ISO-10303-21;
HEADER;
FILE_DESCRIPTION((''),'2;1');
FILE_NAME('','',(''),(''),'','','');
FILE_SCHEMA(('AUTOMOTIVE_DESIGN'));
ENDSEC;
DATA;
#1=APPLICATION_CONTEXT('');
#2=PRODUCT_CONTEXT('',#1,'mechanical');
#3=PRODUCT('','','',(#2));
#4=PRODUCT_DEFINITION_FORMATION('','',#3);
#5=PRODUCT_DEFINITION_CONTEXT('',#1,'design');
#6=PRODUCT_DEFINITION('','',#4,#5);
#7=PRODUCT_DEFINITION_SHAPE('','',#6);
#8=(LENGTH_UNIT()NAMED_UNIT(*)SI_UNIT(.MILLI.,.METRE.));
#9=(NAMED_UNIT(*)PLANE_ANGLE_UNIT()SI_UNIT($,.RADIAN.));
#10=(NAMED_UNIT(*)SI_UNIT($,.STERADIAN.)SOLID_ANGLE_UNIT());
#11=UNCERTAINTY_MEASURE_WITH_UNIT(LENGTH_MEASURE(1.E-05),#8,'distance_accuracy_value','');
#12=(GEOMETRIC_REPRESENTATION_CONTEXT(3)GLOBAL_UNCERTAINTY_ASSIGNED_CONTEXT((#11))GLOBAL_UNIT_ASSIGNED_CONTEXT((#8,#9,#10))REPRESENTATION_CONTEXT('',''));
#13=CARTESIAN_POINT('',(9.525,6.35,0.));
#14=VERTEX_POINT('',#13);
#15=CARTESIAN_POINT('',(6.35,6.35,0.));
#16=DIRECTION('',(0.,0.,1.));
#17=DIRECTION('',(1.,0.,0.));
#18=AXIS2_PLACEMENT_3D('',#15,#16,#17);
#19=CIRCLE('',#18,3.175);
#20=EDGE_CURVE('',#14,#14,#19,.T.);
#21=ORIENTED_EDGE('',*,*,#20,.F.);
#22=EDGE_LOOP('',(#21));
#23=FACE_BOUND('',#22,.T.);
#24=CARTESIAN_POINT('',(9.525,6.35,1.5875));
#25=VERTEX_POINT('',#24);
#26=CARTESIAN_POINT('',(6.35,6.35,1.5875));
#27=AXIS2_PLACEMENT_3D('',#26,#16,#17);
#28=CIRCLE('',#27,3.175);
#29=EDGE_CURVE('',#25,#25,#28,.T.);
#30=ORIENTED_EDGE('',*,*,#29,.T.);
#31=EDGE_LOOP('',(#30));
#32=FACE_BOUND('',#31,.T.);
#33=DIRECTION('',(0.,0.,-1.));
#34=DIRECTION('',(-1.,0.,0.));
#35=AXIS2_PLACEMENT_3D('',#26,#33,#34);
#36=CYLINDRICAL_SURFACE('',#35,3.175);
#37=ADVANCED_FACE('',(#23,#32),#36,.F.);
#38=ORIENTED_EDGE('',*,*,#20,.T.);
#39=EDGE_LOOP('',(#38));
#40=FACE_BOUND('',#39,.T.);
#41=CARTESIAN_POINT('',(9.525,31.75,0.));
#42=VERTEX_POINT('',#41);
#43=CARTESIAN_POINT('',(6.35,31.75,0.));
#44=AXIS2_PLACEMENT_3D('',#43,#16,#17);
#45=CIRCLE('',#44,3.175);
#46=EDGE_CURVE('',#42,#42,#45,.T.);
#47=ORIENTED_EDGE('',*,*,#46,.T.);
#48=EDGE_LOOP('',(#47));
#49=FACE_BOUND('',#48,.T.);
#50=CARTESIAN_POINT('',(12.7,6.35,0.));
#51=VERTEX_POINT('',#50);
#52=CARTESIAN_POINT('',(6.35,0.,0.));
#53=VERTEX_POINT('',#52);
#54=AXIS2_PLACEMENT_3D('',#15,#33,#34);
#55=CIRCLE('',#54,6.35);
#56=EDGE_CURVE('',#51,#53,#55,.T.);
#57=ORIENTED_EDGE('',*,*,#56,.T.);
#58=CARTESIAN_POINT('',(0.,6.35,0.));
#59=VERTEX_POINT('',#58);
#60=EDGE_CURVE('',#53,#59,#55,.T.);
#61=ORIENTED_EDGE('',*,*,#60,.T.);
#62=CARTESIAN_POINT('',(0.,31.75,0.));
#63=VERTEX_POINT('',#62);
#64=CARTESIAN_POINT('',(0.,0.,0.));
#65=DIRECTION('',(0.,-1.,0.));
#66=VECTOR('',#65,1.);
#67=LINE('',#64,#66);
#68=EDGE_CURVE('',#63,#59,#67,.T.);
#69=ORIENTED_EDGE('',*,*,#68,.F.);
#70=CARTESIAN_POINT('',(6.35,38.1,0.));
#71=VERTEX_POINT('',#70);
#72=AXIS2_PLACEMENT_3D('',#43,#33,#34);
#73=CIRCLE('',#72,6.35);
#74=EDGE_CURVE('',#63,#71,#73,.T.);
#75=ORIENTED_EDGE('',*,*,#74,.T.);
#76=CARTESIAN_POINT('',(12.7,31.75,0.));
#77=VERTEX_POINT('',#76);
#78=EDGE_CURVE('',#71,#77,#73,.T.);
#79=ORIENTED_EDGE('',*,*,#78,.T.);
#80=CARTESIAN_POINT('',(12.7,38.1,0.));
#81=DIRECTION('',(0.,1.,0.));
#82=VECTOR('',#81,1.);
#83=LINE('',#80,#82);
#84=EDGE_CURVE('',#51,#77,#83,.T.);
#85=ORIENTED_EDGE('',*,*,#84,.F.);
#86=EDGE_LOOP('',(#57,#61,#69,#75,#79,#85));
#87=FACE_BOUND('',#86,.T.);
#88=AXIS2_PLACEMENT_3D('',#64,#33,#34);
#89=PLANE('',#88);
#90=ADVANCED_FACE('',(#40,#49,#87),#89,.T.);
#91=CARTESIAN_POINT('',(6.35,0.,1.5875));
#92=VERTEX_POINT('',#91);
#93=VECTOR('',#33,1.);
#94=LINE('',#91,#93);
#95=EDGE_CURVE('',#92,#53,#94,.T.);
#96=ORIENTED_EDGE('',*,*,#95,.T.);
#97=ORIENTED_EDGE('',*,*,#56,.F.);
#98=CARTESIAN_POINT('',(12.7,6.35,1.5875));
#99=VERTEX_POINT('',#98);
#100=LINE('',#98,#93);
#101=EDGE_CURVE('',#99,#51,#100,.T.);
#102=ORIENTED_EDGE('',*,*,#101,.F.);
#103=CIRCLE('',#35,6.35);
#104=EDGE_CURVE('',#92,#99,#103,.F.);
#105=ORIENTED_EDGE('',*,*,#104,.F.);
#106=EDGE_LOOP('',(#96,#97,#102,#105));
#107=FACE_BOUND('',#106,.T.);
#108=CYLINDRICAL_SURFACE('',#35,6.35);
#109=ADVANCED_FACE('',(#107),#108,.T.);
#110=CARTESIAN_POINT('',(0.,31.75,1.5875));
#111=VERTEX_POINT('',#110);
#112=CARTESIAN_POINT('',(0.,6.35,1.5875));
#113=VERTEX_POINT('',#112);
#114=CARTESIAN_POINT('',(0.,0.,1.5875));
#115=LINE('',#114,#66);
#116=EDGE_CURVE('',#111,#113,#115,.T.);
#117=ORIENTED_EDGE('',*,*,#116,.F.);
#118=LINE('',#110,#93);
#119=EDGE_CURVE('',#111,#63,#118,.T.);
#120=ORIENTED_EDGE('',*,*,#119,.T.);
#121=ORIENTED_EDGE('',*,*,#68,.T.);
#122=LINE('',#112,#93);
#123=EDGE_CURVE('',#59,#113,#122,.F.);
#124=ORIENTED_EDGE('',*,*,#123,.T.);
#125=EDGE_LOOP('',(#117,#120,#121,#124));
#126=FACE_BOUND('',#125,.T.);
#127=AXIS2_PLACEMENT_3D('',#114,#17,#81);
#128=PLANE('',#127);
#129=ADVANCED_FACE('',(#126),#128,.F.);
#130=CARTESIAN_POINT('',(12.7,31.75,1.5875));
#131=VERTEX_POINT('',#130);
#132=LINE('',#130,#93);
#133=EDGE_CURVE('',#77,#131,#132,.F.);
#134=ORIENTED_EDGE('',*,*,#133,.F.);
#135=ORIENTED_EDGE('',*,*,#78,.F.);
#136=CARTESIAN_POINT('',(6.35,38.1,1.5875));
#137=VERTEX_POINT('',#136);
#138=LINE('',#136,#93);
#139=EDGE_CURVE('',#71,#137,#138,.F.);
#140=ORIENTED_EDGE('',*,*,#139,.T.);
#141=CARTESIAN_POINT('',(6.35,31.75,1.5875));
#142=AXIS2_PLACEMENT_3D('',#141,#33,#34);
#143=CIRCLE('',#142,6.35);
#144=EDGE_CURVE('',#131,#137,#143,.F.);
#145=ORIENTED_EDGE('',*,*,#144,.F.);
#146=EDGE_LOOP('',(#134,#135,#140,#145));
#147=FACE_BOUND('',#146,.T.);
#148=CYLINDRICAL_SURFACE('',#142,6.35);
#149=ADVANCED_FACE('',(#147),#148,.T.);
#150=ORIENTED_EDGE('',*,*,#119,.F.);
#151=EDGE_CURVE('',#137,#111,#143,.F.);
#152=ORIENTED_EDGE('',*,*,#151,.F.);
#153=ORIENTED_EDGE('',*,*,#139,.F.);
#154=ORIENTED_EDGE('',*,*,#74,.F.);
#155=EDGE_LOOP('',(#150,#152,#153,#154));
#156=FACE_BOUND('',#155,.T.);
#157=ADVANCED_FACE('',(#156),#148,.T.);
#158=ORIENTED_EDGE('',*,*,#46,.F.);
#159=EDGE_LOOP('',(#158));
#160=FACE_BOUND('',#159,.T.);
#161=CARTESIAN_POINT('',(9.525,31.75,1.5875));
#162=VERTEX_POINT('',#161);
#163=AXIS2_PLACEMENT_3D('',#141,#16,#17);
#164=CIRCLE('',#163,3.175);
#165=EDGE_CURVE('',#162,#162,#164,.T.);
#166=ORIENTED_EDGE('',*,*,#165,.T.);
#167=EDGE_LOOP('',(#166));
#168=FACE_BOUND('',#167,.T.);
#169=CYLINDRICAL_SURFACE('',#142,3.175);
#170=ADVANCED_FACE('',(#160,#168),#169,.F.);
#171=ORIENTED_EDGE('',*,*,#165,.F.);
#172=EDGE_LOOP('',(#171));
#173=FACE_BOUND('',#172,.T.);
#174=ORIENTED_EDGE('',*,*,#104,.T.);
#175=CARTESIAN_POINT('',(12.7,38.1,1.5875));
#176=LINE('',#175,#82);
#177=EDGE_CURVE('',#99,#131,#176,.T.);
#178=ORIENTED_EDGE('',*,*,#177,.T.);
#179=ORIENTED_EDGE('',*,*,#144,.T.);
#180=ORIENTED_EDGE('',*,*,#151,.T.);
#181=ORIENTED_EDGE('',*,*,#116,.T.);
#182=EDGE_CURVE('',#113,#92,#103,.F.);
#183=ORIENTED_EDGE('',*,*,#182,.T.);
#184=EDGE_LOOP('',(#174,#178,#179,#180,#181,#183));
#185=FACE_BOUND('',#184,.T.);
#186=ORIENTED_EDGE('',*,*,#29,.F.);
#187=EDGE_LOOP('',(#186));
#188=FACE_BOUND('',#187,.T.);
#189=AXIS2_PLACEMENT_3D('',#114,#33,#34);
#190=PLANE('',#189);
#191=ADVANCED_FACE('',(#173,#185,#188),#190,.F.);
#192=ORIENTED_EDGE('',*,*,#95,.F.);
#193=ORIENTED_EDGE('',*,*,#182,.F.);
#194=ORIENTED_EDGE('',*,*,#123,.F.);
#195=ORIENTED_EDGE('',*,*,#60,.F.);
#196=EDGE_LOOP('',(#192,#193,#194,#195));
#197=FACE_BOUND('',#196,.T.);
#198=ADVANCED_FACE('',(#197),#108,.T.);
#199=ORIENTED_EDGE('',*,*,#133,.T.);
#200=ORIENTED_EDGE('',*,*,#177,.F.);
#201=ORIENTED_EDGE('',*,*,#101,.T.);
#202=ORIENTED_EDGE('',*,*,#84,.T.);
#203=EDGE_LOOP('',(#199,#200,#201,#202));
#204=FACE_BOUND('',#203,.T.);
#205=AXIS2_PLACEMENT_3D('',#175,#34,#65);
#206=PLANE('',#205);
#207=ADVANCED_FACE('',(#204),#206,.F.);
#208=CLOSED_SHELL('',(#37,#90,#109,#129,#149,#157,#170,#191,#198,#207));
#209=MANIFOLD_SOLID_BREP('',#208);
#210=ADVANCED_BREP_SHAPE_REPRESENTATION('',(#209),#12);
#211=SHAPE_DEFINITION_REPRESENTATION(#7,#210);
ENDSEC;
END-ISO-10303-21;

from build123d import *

# Parameters (mm, degrees)
SKETCH1_W           = 12.7
SKETCH1_H           = 38.1
SKETCH1_R           = 3.175
BOSS_EXTRUDE1_DEPTH = 1.5875
FILLET1_R           = 6.35


with BuildPart() as part:
    # Sketch1 → Boss-Extrude1 (new body)
    with BuildSketch(Plane.XY):
        with Locations((6.35, 19.05)):
            Rectangle(SKETCH1_W, SKETCH1_H)
        with Locations((6.35, 31.75)):
            Circle(SKETCH1_R, mode=Mode.SUBTRACT)
        with Locations((6.35, 6.35)):
            Circle(SKETCH1_R, mode=Mode.SUBTRACT)
    extrude(amount=BOSS_EXTRUDE1_DEPTH)

    # Fillet1
    fillet1_edges = [part.edges().sort_by_distance(p)[0] for p in [
        (12.7, 38.1, 0.79375),
        (0, 38.1, 0.79375),
        (0, 0, 0.79375),
        (12.7, 0, 0.79375),
    ]]
    fillet(fillet1_edges, radius=FILLET1_R - 0.0001)  # a hair under: the kernel refuses the full size


solid = part.part
